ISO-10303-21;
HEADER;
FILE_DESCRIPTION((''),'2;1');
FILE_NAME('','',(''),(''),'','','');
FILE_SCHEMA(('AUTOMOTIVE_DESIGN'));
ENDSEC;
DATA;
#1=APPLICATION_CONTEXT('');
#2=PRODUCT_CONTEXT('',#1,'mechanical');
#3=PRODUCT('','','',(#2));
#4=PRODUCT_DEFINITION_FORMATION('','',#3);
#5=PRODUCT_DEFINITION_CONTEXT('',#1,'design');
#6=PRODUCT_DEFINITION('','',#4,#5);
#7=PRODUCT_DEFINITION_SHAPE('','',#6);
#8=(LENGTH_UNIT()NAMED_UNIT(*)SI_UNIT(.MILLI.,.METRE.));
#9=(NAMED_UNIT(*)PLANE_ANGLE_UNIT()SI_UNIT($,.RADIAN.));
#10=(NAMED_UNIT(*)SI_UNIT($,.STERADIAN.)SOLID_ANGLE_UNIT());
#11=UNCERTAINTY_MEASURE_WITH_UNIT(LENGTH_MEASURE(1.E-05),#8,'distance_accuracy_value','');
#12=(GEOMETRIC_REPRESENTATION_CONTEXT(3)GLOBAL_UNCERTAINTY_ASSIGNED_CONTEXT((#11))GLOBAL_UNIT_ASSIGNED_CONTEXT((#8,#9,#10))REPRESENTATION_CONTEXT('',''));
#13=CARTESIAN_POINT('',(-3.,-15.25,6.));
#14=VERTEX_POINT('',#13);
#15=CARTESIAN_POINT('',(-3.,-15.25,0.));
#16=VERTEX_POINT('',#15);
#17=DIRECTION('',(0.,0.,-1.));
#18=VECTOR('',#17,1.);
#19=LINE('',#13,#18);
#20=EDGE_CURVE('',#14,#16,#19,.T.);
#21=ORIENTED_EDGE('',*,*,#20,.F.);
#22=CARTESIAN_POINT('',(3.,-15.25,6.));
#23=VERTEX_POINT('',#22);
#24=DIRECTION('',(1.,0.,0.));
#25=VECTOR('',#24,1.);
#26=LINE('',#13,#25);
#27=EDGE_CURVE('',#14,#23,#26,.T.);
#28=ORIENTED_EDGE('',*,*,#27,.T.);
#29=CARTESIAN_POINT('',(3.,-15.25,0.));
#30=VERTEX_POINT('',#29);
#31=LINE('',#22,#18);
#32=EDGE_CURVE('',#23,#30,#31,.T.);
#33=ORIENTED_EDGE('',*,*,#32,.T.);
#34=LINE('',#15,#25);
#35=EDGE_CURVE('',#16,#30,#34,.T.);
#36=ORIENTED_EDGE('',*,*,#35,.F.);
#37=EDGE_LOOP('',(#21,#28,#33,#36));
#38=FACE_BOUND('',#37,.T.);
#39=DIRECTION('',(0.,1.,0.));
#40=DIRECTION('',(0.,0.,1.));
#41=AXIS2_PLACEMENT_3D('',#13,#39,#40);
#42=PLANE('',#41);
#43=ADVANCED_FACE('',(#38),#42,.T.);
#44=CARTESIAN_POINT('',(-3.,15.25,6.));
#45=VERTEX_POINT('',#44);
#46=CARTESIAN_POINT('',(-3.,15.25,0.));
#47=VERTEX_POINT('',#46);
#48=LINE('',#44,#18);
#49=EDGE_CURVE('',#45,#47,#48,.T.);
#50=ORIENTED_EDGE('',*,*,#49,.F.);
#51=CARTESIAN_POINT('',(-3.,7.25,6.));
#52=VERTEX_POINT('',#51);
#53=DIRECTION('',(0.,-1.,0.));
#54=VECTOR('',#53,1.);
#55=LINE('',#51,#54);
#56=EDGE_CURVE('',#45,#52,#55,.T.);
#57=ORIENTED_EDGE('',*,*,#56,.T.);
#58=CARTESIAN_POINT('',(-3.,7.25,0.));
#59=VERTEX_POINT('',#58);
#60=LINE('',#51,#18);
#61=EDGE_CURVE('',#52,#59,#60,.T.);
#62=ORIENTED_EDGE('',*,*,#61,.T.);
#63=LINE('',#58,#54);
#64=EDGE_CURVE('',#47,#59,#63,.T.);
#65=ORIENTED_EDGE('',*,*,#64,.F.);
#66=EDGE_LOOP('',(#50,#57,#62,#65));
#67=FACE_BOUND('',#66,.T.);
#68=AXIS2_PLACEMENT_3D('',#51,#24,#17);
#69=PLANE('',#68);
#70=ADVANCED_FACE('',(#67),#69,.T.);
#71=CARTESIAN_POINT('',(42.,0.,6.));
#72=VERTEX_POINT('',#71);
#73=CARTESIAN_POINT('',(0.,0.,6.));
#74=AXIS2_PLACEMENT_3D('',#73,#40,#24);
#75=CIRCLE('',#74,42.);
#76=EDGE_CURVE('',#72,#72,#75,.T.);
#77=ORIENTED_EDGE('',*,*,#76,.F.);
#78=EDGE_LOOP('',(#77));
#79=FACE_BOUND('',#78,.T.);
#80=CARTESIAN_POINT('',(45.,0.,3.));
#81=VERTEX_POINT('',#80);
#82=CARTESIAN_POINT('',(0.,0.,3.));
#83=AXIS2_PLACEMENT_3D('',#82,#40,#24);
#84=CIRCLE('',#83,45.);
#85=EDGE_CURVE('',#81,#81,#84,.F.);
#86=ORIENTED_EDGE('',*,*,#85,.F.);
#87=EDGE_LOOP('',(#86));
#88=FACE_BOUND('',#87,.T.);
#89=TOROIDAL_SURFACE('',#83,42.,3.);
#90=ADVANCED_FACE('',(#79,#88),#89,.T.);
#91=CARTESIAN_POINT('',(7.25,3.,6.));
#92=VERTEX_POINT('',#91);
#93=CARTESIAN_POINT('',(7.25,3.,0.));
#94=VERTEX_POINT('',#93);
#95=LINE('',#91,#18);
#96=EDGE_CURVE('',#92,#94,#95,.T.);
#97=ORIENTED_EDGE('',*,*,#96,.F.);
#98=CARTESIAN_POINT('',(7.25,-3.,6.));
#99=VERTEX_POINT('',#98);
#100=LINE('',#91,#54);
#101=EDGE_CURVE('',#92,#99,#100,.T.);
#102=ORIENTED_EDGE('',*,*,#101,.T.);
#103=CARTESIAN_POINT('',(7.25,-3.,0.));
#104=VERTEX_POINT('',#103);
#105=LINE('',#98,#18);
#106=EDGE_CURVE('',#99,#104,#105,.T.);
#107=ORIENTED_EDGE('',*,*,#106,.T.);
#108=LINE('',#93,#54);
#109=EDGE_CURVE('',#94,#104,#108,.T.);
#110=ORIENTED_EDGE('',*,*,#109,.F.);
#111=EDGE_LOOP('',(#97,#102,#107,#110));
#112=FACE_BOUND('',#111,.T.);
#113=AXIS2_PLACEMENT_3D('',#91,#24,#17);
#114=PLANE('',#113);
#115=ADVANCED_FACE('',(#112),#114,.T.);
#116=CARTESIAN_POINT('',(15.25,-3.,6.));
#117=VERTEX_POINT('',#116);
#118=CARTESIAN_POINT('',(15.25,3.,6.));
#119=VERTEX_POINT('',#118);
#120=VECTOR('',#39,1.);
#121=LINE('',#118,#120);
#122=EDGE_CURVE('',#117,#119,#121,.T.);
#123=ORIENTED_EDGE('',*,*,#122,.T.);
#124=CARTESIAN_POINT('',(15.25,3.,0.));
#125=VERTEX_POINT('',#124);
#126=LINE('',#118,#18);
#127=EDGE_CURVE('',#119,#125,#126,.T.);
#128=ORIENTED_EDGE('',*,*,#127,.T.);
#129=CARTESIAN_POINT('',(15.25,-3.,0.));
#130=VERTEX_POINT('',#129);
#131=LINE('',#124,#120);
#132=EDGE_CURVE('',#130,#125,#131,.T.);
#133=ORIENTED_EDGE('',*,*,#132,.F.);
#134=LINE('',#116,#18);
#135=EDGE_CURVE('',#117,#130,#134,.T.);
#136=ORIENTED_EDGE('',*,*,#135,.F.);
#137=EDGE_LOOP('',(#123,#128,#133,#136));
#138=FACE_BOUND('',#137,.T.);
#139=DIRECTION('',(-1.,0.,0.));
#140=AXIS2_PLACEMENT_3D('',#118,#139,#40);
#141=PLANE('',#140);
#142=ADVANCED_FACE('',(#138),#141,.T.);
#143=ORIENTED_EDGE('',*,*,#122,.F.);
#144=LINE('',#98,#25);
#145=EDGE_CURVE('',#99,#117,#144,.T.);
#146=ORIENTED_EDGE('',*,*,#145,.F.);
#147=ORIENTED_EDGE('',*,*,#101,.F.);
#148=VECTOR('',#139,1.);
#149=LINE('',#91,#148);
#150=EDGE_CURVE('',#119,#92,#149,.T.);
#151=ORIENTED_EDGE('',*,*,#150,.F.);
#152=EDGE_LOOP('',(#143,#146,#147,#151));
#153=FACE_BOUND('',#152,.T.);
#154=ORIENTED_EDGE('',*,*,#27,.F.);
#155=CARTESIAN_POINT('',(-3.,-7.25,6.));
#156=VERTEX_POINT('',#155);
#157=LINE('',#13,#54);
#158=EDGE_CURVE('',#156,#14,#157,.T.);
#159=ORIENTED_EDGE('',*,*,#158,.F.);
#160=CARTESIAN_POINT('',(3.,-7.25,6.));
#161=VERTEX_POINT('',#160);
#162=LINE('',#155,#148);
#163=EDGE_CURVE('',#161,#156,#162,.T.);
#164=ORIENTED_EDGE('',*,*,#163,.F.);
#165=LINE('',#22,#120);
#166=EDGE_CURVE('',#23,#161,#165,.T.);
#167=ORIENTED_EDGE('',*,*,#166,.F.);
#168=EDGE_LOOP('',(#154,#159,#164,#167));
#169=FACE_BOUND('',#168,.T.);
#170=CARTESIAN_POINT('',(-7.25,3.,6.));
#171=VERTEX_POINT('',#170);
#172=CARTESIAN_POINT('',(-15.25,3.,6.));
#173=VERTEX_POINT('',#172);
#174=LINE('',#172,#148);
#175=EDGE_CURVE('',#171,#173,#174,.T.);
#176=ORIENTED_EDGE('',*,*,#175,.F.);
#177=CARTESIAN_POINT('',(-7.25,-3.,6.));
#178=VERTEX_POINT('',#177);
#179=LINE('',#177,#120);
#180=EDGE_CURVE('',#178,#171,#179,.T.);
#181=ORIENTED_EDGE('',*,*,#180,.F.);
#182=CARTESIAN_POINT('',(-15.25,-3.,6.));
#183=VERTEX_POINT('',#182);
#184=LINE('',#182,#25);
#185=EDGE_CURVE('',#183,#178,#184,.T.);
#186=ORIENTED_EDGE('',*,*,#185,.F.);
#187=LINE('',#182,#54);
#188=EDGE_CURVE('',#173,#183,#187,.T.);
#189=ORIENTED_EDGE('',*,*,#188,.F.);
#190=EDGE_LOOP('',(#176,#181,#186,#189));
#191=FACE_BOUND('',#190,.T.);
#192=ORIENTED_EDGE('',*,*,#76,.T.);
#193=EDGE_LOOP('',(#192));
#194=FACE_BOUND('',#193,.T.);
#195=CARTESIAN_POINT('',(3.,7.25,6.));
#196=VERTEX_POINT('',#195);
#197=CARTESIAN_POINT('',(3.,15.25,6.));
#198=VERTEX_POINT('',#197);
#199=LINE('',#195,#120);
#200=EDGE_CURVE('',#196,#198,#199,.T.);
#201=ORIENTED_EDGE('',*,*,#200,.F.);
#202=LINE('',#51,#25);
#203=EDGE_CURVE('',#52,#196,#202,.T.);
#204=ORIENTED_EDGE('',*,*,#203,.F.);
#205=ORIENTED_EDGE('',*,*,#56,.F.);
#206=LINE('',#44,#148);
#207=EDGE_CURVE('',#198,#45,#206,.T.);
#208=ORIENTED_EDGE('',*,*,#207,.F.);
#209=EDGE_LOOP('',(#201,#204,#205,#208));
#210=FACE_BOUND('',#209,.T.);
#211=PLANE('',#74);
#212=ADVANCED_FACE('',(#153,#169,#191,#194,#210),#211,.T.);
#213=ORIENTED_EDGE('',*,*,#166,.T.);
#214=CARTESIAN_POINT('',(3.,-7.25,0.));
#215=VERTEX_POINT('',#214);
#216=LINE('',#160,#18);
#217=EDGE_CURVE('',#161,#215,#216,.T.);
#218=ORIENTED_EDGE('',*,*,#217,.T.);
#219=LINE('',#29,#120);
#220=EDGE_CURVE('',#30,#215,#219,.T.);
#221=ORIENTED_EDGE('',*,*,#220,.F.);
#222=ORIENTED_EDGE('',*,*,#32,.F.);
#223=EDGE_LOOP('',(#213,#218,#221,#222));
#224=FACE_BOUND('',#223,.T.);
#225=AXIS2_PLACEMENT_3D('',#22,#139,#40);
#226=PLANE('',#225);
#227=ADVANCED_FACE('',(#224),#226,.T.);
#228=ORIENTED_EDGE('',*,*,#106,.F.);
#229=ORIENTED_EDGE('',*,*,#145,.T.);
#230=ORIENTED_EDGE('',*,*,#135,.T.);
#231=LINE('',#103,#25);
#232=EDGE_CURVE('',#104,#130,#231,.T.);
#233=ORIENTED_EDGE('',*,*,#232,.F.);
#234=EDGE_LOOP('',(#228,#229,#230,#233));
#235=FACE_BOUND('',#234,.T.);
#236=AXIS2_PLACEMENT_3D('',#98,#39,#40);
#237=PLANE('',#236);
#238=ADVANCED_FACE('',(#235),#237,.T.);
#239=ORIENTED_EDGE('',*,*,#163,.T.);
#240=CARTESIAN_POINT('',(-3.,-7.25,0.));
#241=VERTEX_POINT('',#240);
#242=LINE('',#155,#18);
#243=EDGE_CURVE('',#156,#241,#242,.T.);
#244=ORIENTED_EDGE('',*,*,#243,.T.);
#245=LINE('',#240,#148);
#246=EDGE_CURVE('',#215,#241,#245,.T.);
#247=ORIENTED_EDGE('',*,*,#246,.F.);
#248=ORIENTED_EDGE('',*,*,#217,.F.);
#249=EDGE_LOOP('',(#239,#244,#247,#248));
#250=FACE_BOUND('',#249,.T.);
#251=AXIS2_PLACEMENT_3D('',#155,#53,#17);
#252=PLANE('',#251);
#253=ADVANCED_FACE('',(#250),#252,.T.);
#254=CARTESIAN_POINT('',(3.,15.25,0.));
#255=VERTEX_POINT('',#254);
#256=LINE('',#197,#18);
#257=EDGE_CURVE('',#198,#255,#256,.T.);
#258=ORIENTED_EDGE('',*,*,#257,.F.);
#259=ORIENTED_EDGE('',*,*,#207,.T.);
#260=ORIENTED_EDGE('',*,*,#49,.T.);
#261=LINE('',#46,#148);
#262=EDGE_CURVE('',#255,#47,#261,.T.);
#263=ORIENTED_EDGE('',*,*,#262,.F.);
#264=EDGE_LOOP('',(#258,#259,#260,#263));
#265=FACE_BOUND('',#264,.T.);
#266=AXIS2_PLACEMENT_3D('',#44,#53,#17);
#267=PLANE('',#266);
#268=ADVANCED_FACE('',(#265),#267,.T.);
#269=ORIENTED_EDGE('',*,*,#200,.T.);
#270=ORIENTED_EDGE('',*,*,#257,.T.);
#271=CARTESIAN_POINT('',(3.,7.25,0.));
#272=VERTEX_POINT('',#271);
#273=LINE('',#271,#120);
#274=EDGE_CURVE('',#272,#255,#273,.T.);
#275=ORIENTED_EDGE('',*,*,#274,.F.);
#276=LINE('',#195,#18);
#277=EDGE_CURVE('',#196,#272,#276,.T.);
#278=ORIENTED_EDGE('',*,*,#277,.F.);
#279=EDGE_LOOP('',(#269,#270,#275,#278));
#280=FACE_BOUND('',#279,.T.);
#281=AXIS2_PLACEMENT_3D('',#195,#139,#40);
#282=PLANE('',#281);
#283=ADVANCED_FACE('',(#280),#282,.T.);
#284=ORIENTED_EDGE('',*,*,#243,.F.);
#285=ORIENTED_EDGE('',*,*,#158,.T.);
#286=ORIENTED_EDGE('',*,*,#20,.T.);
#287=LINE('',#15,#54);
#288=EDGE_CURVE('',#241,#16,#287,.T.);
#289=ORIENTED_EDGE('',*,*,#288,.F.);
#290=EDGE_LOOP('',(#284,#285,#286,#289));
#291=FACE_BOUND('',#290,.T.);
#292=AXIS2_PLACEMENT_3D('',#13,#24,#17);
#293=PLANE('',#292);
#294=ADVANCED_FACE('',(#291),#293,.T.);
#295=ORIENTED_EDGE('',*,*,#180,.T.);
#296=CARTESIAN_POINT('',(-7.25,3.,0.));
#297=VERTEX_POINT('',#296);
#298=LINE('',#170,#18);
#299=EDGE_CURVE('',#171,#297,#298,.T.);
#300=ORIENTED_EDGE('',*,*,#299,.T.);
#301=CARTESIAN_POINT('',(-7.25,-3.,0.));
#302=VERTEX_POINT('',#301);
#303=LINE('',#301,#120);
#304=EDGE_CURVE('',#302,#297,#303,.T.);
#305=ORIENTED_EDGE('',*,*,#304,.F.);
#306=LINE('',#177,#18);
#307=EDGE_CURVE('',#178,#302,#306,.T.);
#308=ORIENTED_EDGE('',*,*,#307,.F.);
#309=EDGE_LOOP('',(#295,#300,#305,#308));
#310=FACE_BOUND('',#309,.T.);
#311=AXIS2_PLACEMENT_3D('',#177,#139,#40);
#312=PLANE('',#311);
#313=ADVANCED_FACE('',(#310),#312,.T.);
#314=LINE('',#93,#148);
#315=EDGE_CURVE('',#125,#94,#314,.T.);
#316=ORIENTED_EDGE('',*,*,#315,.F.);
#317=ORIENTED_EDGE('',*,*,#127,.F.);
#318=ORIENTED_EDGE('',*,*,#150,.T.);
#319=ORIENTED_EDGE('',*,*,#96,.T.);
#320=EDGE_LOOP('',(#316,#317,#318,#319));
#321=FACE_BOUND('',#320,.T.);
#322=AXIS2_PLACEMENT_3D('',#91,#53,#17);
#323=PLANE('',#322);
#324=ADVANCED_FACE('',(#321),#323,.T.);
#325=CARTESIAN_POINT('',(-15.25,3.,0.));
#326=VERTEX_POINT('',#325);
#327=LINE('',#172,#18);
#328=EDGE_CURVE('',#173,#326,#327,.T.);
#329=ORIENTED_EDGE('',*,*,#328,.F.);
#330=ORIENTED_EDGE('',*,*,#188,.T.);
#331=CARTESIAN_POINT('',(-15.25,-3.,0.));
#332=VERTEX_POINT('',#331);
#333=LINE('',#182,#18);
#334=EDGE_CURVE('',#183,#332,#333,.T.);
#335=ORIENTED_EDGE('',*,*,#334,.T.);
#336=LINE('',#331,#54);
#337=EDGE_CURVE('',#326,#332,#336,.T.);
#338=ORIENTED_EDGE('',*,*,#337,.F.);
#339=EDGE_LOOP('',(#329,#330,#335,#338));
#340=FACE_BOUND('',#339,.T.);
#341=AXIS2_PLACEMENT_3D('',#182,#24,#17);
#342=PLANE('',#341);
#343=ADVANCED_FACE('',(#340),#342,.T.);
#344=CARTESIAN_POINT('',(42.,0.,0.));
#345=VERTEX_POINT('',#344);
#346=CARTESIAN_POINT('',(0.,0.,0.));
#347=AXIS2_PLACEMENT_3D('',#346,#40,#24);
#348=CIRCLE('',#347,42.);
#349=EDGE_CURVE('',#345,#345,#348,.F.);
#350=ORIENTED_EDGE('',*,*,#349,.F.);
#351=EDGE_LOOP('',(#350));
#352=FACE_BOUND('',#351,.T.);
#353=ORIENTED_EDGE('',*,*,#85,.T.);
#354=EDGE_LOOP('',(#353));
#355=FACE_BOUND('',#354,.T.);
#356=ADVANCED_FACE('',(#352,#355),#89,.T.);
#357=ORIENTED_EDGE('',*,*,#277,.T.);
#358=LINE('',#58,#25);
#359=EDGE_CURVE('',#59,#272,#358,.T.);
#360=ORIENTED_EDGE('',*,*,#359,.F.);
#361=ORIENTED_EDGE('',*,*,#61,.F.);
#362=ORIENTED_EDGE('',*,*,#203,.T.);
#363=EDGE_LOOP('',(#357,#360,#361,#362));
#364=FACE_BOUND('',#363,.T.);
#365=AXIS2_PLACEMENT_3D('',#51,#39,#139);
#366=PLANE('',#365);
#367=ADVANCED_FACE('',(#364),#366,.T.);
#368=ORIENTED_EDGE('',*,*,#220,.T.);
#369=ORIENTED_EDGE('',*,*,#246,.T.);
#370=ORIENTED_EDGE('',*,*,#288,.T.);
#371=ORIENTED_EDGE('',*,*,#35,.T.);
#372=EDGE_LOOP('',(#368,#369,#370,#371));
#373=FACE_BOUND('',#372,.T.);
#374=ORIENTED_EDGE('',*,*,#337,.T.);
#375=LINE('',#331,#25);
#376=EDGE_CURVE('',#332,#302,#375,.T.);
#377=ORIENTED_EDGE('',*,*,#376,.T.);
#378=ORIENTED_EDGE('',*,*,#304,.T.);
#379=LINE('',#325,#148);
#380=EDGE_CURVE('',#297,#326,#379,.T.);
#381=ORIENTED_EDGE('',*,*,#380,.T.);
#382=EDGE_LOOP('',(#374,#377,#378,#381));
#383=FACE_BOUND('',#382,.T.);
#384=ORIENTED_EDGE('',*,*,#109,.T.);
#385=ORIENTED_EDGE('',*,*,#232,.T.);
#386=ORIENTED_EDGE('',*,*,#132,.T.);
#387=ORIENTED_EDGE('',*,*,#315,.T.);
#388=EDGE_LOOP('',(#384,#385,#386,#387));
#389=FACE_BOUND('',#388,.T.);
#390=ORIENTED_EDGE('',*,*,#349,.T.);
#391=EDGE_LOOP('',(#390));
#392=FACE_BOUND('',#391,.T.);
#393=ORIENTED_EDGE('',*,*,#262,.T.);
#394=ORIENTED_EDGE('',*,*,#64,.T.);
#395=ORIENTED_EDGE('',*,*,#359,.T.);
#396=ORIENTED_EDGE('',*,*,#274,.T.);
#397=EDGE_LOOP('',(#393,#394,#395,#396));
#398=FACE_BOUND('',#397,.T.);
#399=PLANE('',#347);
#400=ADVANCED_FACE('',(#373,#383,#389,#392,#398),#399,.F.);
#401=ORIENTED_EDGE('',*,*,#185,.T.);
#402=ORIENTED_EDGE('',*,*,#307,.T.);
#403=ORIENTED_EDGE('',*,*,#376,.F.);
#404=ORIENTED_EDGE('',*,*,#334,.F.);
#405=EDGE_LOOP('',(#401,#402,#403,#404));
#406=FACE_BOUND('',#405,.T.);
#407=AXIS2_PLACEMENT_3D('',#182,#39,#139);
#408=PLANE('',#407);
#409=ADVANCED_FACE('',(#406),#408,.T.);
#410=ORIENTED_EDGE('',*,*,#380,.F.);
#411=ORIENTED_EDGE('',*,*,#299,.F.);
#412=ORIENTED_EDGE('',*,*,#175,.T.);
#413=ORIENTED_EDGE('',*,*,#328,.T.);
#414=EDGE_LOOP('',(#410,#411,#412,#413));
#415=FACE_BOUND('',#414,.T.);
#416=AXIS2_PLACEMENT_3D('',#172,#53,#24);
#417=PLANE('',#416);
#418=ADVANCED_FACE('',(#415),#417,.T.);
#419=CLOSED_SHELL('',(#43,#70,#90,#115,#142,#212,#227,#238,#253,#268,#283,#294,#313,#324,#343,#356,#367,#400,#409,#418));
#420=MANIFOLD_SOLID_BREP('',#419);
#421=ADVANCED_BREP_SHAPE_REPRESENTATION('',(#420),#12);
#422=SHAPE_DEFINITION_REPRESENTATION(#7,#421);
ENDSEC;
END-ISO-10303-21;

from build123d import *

# Parameters (mm, degrees)
SKETCH1_R           = 45
SKETCH1_W           = 8
SKETCH1_H           = 6
SKETCH1_W_2         = 6
SKETCH1_H_2         = 8
BOSS_EXTRUDE1_DEPTH = 6
FILLET1_R           = 3
FILLET2_R           = 3


with BuildPart() as part:
    # Sketch1 → Boss-Extrude1 (new body)
    with BuildSketch(Plane.XY):
        Circle(SKETCH1_R)
        with Locations((11.25, 0)):
            Rectangle(SKETCH1_W, SKETCH1_H, mode=Mode.SUBTRACT)
        with Locations((0, -11.25)):
            Rectangle(SKETCH1_W_2, SKETCH1_H_2, mode=Mode.SUBTRACT)
        with Locations((-11.25, 0)):
            Rectangle(SKETCH1_W, SKETCH1_H, mode=Mode.SUBTRACT)
        with Locations((0, 11.25)):
            Rectangle(SKETCH1_W_2, SKETCH1_H_2, mode=Mode.SUBTRACT)
    extrude(amount=BOSS_EXTRUDE1_DEPTH)

    # Fillet1
    fillet1_edges = [part.edges().sort_by_distance(p)[0] for p in [
        (-45, 0, 6),
    ]]
    fillet(fillet1_edges, radius=FILLET1_R)

    # Fillet2
    fillet2_edges = [part.edges().sort_by_distance(p)[0] for p in [
        (-45, 0, 0),
    ]]
    fillet(fillet2_edges, radius=FILLET2_R - 0.0001)  # a hair under: the kernel refuses the full size


solid = part.part
